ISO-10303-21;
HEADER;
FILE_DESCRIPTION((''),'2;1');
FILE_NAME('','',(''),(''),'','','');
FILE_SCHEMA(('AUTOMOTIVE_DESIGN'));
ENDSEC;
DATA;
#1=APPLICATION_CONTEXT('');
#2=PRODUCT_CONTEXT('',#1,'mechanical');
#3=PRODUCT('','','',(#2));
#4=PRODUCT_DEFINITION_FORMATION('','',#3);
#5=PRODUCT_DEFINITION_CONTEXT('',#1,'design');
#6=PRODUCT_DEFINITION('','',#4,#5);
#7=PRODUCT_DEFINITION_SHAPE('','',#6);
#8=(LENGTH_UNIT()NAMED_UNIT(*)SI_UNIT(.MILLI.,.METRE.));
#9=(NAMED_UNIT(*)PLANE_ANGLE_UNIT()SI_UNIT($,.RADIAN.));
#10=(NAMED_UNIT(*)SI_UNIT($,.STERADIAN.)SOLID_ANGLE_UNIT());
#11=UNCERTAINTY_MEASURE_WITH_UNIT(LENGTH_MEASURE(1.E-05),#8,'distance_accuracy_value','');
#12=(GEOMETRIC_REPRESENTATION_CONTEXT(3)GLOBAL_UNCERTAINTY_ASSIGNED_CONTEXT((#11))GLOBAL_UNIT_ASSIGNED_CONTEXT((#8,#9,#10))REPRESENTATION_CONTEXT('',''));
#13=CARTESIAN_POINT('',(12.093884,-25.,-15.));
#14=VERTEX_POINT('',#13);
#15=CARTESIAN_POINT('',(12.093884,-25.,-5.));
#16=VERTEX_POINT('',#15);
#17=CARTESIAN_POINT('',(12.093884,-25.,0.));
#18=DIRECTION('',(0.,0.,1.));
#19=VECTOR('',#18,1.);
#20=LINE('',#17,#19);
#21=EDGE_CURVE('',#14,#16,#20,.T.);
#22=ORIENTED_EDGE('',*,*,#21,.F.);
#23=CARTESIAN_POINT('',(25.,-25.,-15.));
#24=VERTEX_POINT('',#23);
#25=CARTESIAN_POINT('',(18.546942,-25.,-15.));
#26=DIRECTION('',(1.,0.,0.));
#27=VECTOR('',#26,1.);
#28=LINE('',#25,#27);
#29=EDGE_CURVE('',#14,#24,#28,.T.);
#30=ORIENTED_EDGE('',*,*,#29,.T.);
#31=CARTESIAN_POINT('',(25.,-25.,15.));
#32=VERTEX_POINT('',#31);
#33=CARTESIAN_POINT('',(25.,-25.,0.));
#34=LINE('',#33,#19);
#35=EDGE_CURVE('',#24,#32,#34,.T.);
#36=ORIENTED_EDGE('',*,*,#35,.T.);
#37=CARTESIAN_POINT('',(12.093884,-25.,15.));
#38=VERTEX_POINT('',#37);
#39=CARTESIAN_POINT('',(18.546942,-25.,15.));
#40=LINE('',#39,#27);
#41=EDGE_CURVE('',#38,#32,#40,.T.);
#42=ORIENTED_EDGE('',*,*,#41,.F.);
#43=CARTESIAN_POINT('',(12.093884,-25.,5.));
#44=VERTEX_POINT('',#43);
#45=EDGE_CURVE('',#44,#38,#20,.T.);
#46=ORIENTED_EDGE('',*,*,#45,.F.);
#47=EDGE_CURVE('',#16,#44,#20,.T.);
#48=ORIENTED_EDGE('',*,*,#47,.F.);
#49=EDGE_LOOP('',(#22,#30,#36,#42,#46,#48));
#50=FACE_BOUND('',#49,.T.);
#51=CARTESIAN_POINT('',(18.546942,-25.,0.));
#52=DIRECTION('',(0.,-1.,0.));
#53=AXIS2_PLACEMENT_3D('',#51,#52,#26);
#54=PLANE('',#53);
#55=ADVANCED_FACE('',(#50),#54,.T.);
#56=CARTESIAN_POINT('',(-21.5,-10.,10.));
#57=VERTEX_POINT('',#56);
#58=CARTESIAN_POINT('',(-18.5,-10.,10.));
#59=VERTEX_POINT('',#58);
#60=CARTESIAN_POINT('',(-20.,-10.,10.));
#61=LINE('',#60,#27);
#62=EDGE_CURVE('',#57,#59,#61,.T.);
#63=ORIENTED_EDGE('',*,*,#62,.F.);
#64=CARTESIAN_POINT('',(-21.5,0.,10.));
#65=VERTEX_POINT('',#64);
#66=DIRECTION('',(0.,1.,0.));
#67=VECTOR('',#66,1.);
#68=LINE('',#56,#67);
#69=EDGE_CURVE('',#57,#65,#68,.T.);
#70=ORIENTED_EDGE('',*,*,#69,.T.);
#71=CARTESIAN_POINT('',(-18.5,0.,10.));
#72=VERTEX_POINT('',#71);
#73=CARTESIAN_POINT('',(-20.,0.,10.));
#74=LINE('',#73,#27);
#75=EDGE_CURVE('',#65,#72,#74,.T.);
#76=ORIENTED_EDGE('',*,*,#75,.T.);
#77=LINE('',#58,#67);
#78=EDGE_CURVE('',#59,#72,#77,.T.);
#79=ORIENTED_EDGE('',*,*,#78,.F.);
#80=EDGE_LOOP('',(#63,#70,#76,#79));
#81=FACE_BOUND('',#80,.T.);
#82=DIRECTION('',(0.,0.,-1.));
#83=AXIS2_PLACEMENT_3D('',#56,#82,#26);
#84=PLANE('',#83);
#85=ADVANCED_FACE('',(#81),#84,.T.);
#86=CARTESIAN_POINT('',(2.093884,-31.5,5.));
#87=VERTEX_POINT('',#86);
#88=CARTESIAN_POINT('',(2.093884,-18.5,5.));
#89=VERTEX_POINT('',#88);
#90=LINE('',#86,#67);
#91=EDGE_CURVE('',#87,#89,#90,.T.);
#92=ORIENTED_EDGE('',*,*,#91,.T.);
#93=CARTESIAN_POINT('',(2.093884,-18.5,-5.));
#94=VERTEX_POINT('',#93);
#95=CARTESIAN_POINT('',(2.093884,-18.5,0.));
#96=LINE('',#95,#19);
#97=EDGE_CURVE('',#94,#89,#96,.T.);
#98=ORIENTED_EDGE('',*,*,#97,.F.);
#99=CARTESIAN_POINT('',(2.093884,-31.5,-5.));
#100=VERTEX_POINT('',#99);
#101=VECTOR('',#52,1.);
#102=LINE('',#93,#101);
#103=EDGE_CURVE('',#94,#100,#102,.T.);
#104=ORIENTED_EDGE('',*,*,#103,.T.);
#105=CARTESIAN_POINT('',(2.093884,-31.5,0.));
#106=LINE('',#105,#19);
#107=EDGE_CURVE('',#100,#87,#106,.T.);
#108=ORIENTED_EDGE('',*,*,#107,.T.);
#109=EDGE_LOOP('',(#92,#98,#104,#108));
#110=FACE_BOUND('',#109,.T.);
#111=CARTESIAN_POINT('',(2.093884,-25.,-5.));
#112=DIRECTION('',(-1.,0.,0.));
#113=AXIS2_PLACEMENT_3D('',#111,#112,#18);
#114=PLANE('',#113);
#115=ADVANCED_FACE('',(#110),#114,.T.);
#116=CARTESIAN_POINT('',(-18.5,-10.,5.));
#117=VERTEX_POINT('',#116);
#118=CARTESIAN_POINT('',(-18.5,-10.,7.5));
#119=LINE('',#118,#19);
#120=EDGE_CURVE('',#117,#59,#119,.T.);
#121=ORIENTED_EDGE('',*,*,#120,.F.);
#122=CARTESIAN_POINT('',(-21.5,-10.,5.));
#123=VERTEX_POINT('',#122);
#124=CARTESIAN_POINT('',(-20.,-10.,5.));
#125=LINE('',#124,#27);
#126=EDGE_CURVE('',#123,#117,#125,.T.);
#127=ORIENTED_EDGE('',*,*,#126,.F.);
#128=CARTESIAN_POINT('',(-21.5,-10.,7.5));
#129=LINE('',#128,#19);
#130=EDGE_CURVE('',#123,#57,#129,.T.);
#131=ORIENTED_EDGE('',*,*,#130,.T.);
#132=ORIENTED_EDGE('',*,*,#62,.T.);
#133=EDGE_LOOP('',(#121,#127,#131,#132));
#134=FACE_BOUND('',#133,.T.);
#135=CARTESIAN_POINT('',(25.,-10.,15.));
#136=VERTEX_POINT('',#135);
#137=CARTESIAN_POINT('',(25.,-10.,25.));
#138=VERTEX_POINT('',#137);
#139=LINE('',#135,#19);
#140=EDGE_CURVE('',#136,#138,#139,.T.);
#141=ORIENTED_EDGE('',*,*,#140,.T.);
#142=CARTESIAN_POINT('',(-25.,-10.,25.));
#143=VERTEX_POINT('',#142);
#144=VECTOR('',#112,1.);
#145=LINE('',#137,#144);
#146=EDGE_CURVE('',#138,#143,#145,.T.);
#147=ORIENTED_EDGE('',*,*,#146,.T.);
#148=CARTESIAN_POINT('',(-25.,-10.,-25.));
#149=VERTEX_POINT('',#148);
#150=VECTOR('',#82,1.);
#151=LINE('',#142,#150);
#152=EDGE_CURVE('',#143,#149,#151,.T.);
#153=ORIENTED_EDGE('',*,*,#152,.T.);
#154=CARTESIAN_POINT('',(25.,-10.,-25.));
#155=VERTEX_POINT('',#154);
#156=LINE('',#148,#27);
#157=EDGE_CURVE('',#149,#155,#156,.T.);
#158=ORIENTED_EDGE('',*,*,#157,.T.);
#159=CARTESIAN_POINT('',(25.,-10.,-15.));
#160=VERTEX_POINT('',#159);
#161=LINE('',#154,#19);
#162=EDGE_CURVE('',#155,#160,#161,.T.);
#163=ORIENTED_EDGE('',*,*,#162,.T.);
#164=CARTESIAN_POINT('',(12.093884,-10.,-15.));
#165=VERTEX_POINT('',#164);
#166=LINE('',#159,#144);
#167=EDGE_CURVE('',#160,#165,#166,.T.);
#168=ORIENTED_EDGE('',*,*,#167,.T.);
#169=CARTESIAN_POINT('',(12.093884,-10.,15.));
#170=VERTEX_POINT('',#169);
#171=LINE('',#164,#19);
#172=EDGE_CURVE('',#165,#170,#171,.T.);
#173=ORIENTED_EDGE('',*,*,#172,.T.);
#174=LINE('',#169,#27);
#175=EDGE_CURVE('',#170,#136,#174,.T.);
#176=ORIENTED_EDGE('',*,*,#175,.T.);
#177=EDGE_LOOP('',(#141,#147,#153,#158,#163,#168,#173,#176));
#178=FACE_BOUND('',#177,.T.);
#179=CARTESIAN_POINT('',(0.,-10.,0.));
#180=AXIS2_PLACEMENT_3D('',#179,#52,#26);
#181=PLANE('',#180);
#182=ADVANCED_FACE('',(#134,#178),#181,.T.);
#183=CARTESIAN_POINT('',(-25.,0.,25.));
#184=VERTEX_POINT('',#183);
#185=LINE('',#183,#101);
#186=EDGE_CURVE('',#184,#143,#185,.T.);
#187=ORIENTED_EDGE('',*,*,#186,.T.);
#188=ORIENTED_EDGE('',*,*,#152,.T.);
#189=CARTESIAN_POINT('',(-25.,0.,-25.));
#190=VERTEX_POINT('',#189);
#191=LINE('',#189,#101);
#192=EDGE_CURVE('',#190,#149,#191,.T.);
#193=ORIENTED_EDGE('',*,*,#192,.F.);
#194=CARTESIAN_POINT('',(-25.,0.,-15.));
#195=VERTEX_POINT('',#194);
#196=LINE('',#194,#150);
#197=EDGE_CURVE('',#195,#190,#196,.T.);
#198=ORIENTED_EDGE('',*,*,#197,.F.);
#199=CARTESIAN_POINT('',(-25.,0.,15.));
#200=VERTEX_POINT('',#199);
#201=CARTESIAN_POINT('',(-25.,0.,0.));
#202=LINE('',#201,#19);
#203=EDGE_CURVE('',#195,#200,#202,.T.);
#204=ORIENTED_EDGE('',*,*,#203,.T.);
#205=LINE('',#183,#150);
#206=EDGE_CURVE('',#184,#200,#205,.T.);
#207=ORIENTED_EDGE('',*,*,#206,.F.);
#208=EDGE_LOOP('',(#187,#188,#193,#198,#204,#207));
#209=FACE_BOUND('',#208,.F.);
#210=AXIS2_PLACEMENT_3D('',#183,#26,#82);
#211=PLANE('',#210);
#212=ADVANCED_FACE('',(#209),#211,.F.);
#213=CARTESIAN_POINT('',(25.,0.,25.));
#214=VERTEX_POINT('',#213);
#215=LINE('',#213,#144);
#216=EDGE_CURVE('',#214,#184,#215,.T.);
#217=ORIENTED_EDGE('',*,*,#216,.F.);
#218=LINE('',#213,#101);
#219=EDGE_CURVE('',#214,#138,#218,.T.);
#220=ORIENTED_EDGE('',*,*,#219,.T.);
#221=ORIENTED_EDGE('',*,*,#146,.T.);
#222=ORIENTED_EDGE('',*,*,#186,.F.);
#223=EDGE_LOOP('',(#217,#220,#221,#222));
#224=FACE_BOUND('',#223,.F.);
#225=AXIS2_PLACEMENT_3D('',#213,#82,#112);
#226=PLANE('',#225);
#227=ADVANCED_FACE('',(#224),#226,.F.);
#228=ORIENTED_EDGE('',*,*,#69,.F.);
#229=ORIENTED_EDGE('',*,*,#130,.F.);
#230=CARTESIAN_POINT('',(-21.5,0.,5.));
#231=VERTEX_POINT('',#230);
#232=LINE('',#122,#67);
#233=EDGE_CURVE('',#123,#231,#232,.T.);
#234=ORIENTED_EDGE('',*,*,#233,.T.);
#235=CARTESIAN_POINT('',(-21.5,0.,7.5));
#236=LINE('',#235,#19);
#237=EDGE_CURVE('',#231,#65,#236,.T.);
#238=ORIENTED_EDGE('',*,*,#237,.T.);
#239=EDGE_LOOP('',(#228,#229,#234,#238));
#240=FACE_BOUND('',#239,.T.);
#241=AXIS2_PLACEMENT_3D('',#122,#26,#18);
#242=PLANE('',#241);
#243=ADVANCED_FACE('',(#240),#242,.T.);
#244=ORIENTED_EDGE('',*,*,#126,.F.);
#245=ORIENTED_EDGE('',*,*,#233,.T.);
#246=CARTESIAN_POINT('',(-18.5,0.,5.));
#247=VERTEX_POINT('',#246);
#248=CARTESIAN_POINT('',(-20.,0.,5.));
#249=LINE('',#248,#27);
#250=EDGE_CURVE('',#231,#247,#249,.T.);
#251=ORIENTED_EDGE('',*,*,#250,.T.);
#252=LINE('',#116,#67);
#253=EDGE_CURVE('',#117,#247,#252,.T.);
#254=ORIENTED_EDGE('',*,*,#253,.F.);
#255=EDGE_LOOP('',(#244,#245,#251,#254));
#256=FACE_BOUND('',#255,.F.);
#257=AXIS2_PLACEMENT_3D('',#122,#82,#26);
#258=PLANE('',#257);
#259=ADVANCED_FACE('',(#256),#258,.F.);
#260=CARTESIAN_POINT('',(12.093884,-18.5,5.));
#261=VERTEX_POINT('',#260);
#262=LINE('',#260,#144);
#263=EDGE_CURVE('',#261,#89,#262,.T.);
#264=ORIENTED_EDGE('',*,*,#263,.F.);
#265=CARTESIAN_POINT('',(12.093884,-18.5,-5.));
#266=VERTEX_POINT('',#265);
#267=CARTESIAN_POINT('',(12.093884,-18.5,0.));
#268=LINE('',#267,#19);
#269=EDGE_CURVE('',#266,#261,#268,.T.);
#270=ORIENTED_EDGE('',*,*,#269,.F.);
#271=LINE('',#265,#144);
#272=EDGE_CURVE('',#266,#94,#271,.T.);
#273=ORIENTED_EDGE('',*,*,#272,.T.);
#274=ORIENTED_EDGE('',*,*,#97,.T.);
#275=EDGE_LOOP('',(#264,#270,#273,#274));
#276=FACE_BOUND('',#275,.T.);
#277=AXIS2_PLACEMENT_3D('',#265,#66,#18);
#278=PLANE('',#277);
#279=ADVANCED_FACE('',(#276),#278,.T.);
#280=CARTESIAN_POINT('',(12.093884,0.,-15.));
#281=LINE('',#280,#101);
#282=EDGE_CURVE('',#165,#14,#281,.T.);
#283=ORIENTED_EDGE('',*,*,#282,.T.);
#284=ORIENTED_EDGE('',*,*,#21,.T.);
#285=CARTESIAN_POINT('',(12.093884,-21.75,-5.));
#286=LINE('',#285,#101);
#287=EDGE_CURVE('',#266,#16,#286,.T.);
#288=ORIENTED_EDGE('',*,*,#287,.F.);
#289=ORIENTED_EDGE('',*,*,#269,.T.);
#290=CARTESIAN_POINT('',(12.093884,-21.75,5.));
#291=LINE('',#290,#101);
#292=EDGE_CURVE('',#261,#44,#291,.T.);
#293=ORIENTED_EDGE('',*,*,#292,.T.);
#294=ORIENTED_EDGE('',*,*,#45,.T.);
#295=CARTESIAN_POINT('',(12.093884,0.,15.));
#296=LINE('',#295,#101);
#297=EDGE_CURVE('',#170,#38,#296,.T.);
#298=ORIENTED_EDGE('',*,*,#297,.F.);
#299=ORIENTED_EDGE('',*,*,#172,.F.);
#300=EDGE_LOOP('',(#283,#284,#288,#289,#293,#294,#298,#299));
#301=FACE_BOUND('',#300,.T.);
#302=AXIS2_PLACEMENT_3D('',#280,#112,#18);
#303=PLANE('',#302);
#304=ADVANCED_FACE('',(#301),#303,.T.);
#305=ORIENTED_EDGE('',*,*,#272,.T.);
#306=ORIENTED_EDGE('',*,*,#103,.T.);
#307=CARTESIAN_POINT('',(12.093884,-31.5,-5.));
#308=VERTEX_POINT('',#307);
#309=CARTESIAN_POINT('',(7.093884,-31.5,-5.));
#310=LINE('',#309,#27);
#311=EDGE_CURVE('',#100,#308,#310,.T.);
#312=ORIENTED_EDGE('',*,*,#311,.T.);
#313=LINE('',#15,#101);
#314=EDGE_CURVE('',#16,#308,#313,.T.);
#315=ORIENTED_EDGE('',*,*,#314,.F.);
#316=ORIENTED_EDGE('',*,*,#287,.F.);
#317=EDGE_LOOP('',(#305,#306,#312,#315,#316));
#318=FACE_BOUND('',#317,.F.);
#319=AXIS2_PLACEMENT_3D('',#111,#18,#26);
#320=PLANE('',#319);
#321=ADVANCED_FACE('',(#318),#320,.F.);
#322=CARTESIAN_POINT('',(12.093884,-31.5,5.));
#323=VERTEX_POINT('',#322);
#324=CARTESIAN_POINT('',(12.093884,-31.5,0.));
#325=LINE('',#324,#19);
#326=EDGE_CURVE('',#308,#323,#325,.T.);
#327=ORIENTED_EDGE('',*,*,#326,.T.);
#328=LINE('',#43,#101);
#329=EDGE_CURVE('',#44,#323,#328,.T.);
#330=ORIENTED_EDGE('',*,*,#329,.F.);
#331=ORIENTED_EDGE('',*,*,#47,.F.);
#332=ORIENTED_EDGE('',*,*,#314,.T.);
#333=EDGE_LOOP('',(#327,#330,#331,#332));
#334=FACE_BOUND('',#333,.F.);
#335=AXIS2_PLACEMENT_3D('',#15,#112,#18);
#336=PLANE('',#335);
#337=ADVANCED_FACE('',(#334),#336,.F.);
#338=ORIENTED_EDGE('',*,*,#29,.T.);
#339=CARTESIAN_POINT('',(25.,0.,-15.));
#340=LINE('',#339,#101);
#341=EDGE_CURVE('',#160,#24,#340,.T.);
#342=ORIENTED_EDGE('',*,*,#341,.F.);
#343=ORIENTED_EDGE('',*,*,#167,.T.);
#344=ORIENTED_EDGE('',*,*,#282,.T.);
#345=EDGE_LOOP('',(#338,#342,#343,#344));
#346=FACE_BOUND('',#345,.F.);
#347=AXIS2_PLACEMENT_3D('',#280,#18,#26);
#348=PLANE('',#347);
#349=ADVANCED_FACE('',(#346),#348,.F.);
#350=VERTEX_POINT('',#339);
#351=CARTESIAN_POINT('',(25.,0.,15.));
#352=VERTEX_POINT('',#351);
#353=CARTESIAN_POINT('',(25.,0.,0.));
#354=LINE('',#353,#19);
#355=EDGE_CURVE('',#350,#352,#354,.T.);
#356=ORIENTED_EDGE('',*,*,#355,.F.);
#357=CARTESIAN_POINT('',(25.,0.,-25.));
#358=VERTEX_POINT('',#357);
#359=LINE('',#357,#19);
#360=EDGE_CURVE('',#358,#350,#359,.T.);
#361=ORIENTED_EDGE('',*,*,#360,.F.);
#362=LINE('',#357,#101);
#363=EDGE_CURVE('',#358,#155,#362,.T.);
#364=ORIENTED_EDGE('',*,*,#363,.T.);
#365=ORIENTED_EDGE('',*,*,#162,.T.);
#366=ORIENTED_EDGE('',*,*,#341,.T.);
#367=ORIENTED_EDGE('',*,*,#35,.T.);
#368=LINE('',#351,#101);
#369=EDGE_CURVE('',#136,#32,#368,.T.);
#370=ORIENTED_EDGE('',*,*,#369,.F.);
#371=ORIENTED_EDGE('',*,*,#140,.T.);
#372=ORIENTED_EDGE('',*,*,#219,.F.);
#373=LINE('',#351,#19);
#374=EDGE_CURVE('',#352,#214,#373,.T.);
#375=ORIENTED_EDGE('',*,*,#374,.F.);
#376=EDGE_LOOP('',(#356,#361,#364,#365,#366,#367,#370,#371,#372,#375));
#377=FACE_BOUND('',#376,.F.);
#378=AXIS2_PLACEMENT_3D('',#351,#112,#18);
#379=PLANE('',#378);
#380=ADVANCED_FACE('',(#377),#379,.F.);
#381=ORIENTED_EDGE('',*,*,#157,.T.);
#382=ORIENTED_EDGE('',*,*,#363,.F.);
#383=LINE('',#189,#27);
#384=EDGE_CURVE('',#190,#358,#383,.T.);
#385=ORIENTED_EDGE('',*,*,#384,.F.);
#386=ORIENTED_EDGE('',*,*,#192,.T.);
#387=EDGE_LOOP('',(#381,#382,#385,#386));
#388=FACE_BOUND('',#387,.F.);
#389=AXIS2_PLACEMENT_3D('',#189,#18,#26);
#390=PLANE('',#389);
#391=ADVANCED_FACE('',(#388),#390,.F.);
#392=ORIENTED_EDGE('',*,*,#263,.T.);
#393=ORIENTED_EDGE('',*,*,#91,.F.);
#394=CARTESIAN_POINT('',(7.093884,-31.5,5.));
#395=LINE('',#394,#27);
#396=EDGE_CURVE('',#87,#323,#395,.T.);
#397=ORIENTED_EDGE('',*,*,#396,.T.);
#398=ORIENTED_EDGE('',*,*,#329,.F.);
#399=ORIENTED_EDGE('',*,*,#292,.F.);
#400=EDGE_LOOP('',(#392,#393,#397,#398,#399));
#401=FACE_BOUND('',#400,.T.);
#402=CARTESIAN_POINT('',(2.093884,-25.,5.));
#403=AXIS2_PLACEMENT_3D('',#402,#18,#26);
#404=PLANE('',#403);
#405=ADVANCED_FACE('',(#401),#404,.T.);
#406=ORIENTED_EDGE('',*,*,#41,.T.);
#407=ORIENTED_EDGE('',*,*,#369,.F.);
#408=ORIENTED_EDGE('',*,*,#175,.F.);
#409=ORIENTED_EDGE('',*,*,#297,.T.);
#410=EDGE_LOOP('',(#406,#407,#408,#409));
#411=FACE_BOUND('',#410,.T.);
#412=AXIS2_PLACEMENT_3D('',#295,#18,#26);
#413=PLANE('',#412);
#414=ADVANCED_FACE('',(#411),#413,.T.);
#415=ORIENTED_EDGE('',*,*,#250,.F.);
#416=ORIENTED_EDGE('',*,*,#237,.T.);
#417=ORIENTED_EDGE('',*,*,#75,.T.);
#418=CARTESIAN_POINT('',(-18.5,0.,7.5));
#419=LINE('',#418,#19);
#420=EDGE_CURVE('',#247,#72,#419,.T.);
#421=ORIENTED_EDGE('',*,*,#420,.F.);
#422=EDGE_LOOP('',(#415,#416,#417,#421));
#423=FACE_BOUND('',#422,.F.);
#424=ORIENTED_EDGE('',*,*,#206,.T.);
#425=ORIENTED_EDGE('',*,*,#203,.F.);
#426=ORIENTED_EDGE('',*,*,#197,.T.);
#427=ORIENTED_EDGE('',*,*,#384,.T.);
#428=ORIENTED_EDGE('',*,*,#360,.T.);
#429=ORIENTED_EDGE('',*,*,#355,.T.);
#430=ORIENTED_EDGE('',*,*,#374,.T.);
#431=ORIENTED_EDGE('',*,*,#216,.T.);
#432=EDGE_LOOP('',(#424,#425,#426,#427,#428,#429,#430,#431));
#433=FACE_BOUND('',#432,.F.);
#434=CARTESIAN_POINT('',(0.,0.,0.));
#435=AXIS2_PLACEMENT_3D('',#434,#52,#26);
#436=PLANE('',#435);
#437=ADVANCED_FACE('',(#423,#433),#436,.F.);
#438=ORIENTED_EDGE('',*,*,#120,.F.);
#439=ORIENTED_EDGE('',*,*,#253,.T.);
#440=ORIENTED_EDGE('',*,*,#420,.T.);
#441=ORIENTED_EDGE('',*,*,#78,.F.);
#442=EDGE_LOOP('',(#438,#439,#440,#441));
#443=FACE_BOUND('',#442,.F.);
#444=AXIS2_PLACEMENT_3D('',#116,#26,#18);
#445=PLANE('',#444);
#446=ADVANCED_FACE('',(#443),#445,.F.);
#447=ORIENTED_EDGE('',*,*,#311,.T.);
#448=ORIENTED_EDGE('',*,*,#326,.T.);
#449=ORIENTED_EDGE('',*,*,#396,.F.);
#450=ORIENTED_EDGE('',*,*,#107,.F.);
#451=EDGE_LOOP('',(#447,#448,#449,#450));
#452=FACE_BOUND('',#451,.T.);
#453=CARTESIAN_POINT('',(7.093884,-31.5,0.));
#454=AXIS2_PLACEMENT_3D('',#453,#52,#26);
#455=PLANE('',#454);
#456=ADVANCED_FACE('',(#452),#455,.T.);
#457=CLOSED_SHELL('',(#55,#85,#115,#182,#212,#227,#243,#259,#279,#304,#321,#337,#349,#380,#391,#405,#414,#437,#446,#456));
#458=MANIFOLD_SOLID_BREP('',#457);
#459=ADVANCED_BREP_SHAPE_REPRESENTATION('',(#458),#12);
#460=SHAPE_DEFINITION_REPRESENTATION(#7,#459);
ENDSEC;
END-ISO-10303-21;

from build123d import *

# Parameters (mm, degrees)
F0_W      = 12.9061160609
F0_H      = 30
F1_DEPTH  = 25
F2_DEPTH  = 10
F3_W      = 6.5
F3_H      = 10
F4_DEPTH  = 10
F5_W      = 6.5
F5_H      = 10
F6_DEPTH  = 10
F7_W      = 15
F7_H      = 30
F8_DEPTH  = 22.9061160609
F9_W      = 10
F9_H      = 10
F10_DEPTH = 6.5
F11_W     = 3
F11_H     = 5
F12_DEPTH = 10


with BuildPart() as f1:
    # F0 (on Front) → F1 (new body)
    with BuildSketch(Plane.XZ):
        with Locations((18.5469419695, 0)):
            Rectangle(F0_W, F0_H)
    extrude(amount=F1_DEPTH)



with BuildPart() as f1b:
    # F0 (on Front) → F1, piece 2 (new body)
    with BuildSketch(Plane.XZ):
        with Locations((-18.5469419695, 0)):
            Rectangle(F0_W, F0_H)
    extrude(amount=F1_DEPTH)


with BuildPart() as f1_1:
    add(f1.part)

    add(f1b.part)  # F2 merges F1b
    # F0 (on Front) → F2 (join)
    with BuildSketch(Plane.XZ):
        Polygon((25, 15), (25, 25), (-25, 25), (-25, 15), (-12.0938839391, 15), (-12.0938839391, -15), (-25, -15), (-25, -25), (25, -25), (25, -15), (12.0938839391, -15), (12.0938839391, 15), align=None)
    extrude(amount=F2_DEPTH)

    # F3 (on face) → F4 (join)
    with BuildSketch(Plane.YZ.offset(-12.0938839391)):
        with Locations((-21.75, 0)):
            Rectangle(F3_W, F3_H)
    extrude(amount=F4_DEPTH)

    # F5 (on face) → F6 (join)
    with BuildSketch(Plane(origin=(12.0938839391, 0, 0), x_dir=(0, -1, 0), z_dir=(-1, 0, 0))):
        with Locations((21.75, 0)):
            Rectangle(F5_W, F5_H)
    extrude(amount=F6_DEPTH)

    # F7 (on face) → F8 (cut, through all)
    with BuildSketch(Plane(origin=(-25, 0, 0), x_dir=(0, -1, 0), z_dir=(-1, 0, 0))):
        with Locations((17.5, 0)):
            Rectangle(F7_W, F7_H)
    extrude(amount=-F8_DEPTH, mode=Mode.SUBTRACT)

    # F9 (on face) → F10 (join)
    with BuildSketch(Plane.XZ.offset(25)):
        with Locations((7.0938839391, 0)):
            Rectangle(F9_W, F9_H)
    extrude(amount=F10_DEPTH)

    # F11 (on face) → F12 (cut)
    with BuildSketch(Plane.XZ.offset(10)):
        with Locations((-20, 7.5)):
            Rectangle(F11_W, F11_H)
    extrude(amount=-F12_DEPTH, mode=Mode.SUBTRACT)


solid = f1_1.part
